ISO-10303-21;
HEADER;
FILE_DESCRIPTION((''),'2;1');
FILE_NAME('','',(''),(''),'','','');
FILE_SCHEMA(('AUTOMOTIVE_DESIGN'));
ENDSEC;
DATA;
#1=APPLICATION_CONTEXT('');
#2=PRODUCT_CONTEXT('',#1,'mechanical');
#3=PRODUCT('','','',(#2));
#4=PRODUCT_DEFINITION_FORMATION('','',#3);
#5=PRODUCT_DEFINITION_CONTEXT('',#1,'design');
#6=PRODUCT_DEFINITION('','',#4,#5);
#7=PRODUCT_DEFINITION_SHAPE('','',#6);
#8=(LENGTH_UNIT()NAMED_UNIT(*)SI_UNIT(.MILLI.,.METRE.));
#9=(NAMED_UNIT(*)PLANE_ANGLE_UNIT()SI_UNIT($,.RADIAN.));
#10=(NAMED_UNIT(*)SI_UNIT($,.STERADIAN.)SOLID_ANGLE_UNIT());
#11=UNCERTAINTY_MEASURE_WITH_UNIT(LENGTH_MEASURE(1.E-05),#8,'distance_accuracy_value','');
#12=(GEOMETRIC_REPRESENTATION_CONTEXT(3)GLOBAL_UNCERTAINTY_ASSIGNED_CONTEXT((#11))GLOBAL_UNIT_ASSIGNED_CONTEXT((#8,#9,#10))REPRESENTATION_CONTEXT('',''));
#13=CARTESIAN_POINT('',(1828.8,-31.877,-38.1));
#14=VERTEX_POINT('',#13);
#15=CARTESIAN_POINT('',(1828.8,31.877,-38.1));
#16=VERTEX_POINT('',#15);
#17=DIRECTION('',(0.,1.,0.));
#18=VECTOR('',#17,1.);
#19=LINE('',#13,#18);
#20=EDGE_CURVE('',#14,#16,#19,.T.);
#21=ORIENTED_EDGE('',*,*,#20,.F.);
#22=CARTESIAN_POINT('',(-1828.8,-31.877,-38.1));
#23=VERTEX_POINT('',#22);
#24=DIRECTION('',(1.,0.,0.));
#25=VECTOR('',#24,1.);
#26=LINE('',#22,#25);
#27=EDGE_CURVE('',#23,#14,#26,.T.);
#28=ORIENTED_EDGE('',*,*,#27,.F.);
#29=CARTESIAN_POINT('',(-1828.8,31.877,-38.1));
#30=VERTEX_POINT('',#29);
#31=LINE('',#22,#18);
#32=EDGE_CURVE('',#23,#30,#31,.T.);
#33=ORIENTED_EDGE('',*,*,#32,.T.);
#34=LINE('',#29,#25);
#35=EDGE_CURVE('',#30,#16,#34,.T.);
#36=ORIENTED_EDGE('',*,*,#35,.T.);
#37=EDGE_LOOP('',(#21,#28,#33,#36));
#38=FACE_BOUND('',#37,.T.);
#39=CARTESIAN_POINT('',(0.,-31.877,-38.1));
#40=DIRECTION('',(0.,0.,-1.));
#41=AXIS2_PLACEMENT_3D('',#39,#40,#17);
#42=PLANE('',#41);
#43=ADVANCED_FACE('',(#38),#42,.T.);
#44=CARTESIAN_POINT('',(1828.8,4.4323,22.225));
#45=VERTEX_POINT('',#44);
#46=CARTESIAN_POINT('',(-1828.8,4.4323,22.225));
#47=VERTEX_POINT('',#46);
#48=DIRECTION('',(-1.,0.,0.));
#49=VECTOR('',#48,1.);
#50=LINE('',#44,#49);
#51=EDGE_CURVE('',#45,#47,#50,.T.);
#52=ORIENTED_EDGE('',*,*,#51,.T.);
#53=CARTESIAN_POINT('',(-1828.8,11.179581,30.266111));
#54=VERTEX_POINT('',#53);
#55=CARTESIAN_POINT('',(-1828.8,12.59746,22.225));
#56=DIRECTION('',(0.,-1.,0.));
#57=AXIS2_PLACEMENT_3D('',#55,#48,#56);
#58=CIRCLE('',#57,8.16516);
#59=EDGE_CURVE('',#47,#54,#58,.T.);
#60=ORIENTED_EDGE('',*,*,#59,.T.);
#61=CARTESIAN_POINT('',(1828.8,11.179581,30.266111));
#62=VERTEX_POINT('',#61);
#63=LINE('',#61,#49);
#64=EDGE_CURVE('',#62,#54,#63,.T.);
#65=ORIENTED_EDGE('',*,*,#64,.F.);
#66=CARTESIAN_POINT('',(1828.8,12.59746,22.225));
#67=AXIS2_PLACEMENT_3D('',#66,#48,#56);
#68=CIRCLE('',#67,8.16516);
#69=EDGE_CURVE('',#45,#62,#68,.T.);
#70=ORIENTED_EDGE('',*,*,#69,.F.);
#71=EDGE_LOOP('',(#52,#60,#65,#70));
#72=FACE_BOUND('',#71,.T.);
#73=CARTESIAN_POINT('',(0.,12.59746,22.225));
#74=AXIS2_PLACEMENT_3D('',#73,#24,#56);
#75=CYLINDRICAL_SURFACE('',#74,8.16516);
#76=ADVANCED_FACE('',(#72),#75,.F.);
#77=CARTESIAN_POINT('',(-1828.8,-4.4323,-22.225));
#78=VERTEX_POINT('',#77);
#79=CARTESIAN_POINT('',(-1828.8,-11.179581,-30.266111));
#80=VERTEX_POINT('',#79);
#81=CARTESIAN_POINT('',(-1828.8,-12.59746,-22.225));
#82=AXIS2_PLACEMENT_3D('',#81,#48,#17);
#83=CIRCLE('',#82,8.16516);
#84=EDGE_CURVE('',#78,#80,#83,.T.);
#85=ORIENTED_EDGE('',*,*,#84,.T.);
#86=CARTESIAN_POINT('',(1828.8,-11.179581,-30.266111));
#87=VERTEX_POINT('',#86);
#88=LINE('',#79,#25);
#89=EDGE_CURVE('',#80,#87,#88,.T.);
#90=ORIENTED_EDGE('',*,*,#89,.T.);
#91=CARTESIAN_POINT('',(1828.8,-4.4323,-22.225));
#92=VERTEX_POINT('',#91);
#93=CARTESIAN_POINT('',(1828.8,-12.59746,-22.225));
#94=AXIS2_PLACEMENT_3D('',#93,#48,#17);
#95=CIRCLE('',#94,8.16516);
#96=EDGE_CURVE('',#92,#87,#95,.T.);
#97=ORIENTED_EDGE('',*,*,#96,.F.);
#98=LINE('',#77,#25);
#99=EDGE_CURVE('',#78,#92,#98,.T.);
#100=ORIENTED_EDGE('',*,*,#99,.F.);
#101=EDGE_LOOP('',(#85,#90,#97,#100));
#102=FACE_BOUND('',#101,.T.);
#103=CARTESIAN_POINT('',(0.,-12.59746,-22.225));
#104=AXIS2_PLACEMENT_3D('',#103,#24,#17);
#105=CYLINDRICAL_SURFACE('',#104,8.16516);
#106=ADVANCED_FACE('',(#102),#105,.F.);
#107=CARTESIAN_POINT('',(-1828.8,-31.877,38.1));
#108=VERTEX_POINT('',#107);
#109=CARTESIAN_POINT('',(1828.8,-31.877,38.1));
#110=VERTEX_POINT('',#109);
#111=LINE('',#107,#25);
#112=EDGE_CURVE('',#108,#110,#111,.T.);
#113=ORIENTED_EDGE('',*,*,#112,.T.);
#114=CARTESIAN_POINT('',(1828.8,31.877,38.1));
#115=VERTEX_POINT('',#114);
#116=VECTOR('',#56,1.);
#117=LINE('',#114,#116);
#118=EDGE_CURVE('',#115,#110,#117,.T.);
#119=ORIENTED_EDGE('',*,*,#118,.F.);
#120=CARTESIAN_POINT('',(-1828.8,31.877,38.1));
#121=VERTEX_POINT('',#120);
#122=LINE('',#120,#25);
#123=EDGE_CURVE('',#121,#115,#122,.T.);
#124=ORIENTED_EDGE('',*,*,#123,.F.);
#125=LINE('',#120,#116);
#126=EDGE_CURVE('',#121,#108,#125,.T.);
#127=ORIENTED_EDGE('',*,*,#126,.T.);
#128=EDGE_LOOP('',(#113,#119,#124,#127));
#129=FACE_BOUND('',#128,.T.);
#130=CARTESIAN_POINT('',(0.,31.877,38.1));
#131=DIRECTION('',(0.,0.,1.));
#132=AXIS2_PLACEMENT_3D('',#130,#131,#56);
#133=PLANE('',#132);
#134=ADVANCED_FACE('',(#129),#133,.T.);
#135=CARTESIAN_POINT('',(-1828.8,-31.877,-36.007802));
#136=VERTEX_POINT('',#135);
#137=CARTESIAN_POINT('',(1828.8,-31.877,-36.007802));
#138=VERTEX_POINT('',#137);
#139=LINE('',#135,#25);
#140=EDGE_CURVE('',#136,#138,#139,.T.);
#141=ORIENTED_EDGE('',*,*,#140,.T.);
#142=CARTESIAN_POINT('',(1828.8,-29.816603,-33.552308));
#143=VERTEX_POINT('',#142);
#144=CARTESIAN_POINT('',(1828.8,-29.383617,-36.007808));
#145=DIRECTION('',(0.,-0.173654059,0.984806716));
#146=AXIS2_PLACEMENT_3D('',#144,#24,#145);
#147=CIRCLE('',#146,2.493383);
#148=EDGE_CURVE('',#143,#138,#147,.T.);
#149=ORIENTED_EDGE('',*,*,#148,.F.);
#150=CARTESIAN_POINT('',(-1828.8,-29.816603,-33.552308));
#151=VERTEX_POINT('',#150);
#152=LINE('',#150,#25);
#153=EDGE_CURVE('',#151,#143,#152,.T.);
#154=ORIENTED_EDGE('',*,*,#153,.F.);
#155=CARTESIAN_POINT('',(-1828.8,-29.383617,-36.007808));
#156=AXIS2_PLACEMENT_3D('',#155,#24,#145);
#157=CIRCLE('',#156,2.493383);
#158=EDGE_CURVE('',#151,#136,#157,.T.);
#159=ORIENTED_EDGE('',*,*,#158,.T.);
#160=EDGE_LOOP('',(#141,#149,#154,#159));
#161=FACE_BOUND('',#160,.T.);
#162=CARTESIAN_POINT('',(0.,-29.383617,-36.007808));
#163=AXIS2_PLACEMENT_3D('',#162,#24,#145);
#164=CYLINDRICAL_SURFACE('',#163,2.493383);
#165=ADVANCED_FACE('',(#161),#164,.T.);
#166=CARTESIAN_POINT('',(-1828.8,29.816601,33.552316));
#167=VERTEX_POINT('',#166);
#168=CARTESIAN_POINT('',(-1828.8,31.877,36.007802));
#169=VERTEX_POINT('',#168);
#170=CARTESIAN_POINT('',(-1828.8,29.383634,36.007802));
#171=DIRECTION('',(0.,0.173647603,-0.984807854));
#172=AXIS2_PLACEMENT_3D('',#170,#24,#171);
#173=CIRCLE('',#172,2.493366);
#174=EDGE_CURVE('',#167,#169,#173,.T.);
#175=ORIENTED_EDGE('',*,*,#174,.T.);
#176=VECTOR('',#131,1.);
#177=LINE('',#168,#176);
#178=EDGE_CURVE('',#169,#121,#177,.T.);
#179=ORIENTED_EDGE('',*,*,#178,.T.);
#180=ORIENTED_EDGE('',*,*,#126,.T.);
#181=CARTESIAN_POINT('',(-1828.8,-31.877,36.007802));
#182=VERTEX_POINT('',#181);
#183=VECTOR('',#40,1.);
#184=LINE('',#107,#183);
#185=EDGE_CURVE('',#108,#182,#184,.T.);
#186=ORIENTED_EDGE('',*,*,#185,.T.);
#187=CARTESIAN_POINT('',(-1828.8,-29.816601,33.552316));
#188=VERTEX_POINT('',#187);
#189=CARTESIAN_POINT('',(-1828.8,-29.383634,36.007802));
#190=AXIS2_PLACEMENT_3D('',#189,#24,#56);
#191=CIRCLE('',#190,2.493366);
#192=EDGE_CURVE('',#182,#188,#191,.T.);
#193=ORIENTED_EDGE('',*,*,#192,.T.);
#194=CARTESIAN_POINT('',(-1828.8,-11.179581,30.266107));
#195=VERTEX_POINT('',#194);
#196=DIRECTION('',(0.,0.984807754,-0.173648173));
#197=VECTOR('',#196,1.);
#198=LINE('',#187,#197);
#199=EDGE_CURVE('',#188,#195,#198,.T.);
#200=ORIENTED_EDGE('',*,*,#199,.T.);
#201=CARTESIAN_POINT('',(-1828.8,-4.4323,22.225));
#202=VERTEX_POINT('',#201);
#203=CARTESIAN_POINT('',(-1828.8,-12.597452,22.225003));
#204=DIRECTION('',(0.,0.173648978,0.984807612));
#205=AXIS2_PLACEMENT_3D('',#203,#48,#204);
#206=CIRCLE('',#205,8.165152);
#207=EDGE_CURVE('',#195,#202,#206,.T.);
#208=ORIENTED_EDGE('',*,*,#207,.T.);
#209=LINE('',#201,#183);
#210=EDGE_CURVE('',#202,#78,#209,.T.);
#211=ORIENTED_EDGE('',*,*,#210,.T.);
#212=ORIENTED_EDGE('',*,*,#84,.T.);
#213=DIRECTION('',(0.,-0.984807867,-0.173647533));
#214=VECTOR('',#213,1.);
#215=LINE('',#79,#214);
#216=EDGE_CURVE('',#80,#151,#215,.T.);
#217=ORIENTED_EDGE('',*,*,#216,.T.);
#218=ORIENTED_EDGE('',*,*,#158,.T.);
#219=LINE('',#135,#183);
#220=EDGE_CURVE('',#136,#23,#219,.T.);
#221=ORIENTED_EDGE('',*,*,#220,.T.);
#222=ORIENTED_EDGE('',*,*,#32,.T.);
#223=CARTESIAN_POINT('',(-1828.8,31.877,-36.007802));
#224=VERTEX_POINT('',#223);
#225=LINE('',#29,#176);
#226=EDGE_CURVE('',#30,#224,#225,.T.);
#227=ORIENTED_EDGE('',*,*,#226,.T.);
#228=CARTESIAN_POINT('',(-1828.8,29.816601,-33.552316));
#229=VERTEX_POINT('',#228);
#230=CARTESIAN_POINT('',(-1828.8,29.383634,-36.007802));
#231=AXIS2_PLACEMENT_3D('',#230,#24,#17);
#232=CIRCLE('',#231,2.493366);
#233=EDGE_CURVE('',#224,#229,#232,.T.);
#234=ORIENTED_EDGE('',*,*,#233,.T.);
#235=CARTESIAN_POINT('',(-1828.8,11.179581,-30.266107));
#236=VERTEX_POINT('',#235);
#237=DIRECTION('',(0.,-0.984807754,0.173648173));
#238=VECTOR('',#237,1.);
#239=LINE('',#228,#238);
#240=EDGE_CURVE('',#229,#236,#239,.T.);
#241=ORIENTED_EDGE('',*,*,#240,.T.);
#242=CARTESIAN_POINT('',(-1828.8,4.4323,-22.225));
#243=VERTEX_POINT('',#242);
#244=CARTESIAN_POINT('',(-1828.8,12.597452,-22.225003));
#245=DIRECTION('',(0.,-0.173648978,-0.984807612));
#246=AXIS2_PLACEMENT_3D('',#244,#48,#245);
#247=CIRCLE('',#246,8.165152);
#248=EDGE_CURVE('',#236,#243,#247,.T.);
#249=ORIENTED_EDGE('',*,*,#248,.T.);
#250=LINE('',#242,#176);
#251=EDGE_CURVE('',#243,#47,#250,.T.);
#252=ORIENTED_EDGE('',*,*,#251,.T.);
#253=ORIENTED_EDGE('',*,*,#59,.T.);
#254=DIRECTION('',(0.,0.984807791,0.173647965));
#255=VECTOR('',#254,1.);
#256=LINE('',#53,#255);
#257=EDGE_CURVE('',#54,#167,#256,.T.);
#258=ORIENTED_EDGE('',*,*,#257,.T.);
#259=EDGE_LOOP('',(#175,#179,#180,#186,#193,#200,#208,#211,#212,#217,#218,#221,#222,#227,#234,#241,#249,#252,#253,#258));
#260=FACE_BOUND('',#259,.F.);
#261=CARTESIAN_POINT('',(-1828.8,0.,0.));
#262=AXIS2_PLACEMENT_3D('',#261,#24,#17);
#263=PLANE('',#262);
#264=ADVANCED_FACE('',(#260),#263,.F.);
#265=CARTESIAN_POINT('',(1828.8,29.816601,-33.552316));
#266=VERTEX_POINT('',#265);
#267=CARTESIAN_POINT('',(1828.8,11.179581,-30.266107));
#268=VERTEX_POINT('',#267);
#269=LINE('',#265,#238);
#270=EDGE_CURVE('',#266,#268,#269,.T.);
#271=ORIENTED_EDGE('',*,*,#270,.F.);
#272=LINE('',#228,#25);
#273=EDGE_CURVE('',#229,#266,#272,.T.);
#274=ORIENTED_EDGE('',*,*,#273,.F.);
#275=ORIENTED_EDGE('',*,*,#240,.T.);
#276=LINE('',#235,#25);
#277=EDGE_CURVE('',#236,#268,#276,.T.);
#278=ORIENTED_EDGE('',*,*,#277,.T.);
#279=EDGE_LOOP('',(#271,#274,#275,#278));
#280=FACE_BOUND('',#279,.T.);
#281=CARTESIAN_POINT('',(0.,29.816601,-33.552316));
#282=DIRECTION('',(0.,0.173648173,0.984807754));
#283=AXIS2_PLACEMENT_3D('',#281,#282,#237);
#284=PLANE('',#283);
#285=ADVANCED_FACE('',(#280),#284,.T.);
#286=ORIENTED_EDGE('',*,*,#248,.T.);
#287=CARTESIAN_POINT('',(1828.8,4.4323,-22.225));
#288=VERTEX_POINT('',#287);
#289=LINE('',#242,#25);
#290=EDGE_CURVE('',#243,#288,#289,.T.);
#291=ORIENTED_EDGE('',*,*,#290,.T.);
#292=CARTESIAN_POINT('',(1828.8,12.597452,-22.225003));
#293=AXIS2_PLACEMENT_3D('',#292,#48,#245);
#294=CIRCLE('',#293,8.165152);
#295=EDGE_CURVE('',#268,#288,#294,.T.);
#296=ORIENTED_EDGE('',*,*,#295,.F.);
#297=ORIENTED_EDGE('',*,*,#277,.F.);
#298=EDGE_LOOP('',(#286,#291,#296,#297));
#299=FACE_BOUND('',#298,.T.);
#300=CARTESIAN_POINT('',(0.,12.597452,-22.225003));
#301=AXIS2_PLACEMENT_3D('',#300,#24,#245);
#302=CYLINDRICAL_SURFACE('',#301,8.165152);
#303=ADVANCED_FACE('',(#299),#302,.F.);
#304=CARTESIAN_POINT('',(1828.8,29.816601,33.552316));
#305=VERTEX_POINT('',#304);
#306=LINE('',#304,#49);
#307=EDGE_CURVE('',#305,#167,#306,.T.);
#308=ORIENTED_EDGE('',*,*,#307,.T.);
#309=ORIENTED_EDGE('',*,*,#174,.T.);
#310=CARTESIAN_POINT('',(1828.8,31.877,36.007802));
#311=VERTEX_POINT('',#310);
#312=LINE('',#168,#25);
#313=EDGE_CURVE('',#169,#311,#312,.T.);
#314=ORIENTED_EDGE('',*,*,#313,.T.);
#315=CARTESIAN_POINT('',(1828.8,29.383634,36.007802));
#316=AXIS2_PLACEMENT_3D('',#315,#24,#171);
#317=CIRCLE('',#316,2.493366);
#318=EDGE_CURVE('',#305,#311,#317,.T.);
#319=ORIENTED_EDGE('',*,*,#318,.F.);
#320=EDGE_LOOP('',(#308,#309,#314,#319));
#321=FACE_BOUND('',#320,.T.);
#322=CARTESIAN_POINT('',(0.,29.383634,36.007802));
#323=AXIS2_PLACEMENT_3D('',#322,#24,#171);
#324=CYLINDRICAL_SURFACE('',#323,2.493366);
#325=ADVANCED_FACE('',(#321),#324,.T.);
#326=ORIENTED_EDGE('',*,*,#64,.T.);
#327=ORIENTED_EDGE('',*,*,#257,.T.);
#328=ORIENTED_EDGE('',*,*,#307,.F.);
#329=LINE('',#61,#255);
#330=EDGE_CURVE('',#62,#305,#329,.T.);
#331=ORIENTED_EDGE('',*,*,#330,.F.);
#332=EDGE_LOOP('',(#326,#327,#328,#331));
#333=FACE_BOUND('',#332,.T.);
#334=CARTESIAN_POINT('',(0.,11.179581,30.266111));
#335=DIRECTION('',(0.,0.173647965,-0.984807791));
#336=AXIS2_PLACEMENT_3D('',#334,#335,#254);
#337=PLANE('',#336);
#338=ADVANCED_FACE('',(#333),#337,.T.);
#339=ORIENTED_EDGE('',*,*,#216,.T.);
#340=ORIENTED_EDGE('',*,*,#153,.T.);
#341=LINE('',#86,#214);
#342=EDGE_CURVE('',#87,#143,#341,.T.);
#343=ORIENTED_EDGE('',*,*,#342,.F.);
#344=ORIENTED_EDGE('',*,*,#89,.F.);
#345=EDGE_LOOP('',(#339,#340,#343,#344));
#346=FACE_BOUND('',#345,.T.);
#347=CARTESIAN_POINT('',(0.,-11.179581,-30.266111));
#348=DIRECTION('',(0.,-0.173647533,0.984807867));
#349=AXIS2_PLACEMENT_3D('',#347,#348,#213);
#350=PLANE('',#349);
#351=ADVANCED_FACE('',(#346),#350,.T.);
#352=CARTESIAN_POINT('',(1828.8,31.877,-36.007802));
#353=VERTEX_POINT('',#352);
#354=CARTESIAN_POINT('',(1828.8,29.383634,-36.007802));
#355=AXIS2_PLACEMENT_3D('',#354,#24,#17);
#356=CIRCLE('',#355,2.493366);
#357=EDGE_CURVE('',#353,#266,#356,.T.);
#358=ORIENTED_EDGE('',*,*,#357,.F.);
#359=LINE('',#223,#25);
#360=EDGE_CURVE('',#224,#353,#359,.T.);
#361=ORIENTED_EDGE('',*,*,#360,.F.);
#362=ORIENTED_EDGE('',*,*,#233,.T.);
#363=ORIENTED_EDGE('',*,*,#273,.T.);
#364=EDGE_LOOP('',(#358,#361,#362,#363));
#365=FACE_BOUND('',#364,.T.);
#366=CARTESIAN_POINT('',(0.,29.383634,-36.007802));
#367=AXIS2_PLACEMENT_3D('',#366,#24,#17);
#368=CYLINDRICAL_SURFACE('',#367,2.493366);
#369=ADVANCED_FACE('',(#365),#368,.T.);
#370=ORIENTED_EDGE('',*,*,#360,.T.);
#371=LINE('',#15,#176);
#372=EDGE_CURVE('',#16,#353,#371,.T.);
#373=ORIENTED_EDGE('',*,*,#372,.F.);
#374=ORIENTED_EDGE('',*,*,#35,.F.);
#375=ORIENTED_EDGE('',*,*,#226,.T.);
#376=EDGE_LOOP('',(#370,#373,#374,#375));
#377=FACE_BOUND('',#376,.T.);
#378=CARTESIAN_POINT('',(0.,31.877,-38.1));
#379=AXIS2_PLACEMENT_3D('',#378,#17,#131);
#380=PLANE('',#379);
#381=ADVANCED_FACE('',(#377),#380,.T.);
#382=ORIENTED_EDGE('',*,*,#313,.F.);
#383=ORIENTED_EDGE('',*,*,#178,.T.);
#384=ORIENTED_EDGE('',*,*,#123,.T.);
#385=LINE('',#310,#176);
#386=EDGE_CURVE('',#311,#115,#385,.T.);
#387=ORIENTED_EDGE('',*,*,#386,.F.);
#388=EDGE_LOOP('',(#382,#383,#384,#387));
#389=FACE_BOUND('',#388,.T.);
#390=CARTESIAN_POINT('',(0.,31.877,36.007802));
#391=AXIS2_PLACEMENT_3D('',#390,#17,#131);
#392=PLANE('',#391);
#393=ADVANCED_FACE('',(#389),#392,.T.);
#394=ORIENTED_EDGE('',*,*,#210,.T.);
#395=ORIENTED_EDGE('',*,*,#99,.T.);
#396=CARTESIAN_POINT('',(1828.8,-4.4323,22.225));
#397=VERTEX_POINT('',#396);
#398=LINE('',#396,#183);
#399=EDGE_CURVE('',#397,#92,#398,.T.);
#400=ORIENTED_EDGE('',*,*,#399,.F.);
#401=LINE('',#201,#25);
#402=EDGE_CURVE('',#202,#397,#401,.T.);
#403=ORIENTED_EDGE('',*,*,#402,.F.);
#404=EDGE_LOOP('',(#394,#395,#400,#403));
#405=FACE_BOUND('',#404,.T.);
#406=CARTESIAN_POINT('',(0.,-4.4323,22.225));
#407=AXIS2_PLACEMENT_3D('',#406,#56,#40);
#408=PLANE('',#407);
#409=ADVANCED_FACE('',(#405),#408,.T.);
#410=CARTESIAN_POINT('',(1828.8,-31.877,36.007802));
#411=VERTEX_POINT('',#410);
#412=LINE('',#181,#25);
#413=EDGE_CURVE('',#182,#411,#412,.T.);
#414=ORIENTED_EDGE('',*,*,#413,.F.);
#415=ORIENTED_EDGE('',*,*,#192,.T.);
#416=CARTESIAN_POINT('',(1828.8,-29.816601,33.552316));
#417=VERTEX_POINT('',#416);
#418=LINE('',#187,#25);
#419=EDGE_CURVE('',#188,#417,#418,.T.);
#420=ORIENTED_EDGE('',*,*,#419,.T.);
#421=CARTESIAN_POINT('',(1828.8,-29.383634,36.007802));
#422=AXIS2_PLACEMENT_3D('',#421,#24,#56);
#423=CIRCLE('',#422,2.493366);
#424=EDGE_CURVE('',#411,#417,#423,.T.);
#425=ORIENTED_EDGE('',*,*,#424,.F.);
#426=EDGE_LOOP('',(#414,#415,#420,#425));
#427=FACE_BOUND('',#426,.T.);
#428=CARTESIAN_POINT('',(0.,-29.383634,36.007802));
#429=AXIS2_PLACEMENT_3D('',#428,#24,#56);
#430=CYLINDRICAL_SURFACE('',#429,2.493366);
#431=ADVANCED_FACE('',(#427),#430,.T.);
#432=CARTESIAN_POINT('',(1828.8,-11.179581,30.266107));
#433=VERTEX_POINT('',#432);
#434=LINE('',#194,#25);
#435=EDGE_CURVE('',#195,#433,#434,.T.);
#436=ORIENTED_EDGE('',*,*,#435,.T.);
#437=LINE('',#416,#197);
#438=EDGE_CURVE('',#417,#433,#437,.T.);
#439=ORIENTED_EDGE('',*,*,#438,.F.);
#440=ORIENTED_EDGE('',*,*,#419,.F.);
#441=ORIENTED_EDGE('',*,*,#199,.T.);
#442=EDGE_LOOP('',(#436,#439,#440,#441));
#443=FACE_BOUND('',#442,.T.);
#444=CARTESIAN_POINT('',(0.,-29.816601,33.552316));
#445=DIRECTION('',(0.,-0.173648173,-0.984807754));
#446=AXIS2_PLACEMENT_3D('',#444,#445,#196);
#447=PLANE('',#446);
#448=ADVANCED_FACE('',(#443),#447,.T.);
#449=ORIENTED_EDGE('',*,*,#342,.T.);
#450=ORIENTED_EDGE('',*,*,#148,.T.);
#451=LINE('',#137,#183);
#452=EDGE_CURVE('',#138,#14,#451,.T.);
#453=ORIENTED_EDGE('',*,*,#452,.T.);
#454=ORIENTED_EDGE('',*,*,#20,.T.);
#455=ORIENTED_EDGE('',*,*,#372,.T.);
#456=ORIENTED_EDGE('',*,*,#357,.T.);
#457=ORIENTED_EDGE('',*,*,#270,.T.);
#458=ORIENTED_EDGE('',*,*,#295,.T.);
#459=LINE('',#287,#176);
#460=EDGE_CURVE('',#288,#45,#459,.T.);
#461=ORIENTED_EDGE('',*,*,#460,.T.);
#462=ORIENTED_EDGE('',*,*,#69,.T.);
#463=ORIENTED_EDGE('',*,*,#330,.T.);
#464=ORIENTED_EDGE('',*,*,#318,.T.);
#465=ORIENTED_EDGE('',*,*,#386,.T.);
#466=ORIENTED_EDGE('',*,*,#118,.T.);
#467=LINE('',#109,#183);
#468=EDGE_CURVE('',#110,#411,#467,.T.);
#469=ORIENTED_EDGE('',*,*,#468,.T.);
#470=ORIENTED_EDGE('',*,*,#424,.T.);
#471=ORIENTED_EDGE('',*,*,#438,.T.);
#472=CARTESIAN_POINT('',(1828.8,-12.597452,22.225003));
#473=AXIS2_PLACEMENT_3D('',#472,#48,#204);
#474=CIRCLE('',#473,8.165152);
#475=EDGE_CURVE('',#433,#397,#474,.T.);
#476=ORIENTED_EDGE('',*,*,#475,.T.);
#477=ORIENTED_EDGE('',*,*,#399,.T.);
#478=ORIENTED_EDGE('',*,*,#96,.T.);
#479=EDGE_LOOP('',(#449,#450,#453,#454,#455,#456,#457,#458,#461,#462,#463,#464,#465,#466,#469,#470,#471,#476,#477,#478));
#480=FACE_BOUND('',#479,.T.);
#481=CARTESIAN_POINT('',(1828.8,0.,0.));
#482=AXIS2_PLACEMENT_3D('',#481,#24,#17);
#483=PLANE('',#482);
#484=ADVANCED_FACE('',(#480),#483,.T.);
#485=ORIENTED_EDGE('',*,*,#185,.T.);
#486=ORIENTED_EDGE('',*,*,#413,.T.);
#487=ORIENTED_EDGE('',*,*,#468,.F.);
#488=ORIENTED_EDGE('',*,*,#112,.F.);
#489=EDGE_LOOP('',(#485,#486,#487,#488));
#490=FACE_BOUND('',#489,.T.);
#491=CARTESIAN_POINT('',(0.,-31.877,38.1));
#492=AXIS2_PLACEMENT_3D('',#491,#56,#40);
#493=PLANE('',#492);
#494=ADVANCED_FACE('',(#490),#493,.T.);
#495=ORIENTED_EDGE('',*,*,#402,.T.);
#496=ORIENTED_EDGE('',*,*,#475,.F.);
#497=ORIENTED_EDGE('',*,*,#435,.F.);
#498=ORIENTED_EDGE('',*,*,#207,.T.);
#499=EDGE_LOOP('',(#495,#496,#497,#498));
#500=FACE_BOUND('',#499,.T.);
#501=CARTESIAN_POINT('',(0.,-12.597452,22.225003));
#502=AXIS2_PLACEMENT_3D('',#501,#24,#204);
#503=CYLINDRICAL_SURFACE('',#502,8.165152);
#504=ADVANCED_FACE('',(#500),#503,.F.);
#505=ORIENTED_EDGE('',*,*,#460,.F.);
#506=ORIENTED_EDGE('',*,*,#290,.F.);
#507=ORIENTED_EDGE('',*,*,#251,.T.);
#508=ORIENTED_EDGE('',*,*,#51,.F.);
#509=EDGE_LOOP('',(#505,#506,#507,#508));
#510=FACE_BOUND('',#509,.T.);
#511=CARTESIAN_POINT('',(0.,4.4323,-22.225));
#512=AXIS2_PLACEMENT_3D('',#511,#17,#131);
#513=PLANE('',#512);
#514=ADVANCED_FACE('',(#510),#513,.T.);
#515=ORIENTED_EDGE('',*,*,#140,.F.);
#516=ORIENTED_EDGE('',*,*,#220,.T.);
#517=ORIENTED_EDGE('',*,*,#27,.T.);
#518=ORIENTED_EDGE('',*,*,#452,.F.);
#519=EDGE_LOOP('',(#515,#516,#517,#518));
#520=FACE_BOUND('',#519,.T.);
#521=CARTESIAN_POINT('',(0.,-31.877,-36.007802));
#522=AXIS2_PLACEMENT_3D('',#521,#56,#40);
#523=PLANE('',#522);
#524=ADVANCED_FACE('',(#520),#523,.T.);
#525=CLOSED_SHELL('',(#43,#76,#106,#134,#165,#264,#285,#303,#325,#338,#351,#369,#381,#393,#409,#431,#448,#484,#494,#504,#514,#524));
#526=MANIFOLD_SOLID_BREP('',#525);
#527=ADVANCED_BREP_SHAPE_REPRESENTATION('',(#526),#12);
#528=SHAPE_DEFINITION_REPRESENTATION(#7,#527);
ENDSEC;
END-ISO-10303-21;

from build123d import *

# Parameters (mm, degrees)
F1_DEPTH = 1828.8


# Not quite as in the source:
# - ends of sketch curves that miss each other by under 0.0002 mm in the source are joined


with BuildPart() as f1:
    # F0 (on Right) → F1 (new body, symmetric)
    with BuildSketch(Plane.YZ):
        with BuildLine():
            ThreePointArc((29.8166013588, 33.5523159732), (31.2936627946, 34.4050969282), (31.877, 36.007802))
            Line((31.877, 36.007802), (31.877, 38.1))
            Line((31.877, 38.1), (-31.877, 38.1))
            Line((-31.877, 38.1), (-31.877, 36.007802))
            ThreePointArc((-31.877, 36.007802), (-31.2936627946, 34.4050969282), (-29.8166013588, 33.5523159732))
            Line((-29.8166013588, 33.5523159732), (-11.1795814, 30.2661066))
            ThreePointArc((-11.1795814, 30.2661066), (-6.3425799325, 27.4734582433), (-4.4323, 22.225))
            Line((-4.4323, 22.225), (-4.4323, -22.225))
            ThreePointArc((-4.4323, -22.225), (-6.3425799325, -27.4734582433), (-11.1795807041, -30.2661105468))
            Line((-11.1795807041, -30.2661105468), (-29.8166028, -33.5523078))
            ThreePointArc((-29.8166028, -33.5523078), (-31.2936627946, -34.4050969282), (-31.877, -36.007802))
            Line((-31.877, -36.007802), (-31.877, -38.1))
            Line((-31.877, -38.1), (31.877, -38.1))
            Line((31.877, -38.1), (31.877, -36.007802))
            ThreePointArc((31.877, -36.007802), (31.2936627946, -34.4050969282), (29.8166013588, -33.5523159732))
            Line((29.8166013588, -33.5523159732), (11.1795814, -30.2661066))
            ThreePointArc((11.1795814, -30.2661066), (6.3425799325, -27.4734582433), (4.4323, -22.225))
            Line((4.4323, -22.225), (4.4323, 22.225))
            ThreePointArc((4.4323, 22.225), (6.3425799325, 27.4734582433), (11.1795807041, 30.2661105468))
            Line((11.1795807041, 30.2661105468), (29.8166013588, 33.5523159732))
        make_face()
    extrude(amount=F1_DEPTH, both=True)


solid = f1.part
